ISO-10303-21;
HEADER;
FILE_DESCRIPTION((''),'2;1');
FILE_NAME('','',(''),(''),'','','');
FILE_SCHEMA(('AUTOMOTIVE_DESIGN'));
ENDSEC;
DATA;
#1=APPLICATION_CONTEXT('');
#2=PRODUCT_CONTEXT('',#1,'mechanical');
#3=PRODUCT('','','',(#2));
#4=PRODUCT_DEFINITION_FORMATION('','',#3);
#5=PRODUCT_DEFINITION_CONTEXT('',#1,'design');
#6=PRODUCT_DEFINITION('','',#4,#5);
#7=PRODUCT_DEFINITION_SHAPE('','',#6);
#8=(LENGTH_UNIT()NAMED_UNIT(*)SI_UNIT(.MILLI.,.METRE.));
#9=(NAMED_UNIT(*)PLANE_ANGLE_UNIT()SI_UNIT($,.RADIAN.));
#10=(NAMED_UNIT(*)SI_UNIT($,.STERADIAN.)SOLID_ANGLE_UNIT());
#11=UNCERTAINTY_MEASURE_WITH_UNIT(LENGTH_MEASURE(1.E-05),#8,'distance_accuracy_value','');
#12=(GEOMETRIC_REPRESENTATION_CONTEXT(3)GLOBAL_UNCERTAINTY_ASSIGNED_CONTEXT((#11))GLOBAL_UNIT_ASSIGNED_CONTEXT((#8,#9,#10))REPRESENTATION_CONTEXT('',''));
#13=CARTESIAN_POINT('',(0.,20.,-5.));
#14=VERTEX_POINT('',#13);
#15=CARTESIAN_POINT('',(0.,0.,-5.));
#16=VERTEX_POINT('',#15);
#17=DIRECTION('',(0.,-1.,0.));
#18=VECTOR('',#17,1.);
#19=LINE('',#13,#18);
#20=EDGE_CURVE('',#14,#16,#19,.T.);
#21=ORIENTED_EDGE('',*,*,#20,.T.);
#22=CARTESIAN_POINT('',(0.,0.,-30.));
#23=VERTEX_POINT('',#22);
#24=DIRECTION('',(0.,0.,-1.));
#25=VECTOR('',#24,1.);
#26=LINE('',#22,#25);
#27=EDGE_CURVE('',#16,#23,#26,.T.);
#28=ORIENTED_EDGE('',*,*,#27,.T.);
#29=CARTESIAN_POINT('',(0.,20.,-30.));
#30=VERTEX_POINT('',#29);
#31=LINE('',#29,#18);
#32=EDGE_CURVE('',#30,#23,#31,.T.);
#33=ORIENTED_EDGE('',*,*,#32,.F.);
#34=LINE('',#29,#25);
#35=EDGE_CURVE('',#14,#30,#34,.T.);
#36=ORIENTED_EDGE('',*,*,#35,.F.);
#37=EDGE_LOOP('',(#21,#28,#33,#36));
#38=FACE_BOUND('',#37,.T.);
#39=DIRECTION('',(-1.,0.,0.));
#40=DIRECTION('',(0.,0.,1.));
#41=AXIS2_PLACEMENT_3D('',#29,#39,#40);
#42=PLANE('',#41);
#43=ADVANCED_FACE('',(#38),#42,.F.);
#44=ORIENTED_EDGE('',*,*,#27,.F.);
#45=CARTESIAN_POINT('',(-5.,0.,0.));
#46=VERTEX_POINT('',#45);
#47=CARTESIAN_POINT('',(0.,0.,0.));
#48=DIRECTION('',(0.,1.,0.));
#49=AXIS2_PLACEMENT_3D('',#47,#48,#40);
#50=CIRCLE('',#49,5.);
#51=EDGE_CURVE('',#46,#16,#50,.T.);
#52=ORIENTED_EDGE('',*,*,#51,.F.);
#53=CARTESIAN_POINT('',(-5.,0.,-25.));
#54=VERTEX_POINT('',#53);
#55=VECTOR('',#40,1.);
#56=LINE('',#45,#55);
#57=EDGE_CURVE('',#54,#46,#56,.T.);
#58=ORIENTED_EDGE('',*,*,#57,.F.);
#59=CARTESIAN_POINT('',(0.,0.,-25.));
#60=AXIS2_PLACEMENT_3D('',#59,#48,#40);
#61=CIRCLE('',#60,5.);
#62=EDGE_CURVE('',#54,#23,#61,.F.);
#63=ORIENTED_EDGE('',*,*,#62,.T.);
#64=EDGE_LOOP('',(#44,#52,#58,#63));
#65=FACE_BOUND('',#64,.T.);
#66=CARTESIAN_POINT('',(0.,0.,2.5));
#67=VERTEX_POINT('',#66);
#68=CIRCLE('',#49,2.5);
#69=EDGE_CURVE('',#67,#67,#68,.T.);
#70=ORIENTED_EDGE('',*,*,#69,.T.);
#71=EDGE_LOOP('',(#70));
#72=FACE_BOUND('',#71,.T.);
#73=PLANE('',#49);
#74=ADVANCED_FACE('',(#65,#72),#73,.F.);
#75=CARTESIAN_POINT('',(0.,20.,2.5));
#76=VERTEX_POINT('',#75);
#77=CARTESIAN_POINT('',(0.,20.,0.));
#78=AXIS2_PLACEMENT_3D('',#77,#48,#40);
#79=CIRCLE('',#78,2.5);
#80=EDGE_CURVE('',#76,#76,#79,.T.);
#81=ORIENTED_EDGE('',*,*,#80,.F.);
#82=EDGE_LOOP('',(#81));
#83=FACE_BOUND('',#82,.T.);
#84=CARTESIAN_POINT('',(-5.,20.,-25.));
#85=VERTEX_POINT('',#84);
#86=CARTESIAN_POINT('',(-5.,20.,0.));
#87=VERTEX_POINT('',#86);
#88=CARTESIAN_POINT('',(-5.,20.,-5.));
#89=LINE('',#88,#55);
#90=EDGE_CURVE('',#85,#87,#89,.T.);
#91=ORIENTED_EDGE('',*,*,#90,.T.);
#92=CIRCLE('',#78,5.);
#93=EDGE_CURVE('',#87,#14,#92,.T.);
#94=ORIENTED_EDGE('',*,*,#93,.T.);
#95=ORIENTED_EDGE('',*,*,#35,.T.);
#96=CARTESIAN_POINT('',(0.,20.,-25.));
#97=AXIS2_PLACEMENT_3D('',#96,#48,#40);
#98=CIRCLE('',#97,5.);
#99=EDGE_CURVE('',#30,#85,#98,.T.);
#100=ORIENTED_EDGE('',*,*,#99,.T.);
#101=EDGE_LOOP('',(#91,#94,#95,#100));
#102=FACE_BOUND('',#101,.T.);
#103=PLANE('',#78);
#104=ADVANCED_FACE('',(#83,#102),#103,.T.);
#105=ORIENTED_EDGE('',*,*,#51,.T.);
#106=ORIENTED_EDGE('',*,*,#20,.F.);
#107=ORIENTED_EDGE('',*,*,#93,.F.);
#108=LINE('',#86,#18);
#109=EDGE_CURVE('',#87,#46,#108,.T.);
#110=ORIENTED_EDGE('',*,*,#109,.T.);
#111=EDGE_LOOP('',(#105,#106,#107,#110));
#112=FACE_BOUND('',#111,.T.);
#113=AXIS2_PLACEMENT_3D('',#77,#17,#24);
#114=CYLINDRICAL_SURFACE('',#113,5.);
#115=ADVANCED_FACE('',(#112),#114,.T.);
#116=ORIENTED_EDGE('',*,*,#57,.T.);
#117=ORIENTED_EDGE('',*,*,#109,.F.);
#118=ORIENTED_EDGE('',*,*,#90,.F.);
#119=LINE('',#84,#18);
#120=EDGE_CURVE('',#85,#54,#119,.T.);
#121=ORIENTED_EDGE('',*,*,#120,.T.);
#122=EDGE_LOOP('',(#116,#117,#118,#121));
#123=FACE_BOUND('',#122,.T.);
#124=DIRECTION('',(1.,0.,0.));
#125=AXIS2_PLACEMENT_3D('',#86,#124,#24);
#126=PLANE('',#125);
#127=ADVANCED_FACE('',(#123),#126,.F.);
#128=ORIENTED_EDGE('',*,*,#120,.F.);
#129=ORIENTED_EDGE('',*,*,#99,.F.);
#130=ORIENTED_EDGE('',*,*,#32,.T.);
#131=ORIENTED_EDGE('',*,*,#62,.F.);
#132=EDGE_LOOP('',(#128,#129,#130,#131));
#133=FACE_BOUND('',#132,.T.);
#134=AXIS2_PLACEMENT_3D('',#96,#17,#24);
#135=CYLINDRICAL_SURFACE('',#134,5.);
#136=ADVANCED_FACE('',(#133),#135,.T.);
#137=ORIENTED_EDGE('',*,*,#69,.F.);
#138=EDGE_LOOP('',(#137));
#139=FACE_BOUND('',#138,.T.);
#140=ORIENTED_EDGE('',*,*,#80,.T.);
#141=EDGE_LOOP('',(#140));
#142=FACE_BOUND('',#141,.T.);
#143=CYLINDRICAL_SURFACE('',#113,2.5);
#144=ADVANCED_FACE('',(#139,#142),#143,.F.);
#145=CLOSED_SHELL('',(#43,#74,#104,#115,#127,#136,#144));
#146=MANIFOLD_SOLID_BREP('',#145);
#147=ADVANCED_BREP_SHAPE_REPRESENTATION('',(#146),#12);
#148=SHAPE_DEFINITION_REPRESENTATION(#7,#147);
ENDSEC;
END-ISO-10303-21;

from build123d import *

# Parameters (mm, degrees)
SKETCH1_R           = 2.5
BOSS_EXTRUDE1_DEPTH = 20
FILLET1_R           = 5


with BuildPart() as part:
    # Sketch1 → Boss-Extrude1 (new body)
    with BuildSketch(Plane(origin=(0, 0, 0), x_dir=(1, 0, 0), z_dir=(0, 1, 0))):
        with BuildLine():
            Line((0, 30), (0, 5))
            ThreePointArc((0, 5), (3.535533906, -3.535533906), (-5, 0))
            Line((-5, 0), (-5, 5))
            Line((-5, 5), (-5, 30))
            Line((-5, 30), (0, 30))
        make_face()
        with Locations(Location((0, 0, 0), (0, 0, 270))):
            Circle(SKETCH1_R, mode=Mode.SUBTRACT)
    extrude(amount=BOSS_EXTRUDE1_DEPTH)

    # Fillet1
    fillet1_edges = [part.edges().sort_by_distance(p)[0] for p in [
        (-5, 10, -30),
    ]]
    fillet(fillet1_edges, radius=FILLET1_R - 0.0001)  # a hair under: the kernel refuses the full size


solid = part.part
